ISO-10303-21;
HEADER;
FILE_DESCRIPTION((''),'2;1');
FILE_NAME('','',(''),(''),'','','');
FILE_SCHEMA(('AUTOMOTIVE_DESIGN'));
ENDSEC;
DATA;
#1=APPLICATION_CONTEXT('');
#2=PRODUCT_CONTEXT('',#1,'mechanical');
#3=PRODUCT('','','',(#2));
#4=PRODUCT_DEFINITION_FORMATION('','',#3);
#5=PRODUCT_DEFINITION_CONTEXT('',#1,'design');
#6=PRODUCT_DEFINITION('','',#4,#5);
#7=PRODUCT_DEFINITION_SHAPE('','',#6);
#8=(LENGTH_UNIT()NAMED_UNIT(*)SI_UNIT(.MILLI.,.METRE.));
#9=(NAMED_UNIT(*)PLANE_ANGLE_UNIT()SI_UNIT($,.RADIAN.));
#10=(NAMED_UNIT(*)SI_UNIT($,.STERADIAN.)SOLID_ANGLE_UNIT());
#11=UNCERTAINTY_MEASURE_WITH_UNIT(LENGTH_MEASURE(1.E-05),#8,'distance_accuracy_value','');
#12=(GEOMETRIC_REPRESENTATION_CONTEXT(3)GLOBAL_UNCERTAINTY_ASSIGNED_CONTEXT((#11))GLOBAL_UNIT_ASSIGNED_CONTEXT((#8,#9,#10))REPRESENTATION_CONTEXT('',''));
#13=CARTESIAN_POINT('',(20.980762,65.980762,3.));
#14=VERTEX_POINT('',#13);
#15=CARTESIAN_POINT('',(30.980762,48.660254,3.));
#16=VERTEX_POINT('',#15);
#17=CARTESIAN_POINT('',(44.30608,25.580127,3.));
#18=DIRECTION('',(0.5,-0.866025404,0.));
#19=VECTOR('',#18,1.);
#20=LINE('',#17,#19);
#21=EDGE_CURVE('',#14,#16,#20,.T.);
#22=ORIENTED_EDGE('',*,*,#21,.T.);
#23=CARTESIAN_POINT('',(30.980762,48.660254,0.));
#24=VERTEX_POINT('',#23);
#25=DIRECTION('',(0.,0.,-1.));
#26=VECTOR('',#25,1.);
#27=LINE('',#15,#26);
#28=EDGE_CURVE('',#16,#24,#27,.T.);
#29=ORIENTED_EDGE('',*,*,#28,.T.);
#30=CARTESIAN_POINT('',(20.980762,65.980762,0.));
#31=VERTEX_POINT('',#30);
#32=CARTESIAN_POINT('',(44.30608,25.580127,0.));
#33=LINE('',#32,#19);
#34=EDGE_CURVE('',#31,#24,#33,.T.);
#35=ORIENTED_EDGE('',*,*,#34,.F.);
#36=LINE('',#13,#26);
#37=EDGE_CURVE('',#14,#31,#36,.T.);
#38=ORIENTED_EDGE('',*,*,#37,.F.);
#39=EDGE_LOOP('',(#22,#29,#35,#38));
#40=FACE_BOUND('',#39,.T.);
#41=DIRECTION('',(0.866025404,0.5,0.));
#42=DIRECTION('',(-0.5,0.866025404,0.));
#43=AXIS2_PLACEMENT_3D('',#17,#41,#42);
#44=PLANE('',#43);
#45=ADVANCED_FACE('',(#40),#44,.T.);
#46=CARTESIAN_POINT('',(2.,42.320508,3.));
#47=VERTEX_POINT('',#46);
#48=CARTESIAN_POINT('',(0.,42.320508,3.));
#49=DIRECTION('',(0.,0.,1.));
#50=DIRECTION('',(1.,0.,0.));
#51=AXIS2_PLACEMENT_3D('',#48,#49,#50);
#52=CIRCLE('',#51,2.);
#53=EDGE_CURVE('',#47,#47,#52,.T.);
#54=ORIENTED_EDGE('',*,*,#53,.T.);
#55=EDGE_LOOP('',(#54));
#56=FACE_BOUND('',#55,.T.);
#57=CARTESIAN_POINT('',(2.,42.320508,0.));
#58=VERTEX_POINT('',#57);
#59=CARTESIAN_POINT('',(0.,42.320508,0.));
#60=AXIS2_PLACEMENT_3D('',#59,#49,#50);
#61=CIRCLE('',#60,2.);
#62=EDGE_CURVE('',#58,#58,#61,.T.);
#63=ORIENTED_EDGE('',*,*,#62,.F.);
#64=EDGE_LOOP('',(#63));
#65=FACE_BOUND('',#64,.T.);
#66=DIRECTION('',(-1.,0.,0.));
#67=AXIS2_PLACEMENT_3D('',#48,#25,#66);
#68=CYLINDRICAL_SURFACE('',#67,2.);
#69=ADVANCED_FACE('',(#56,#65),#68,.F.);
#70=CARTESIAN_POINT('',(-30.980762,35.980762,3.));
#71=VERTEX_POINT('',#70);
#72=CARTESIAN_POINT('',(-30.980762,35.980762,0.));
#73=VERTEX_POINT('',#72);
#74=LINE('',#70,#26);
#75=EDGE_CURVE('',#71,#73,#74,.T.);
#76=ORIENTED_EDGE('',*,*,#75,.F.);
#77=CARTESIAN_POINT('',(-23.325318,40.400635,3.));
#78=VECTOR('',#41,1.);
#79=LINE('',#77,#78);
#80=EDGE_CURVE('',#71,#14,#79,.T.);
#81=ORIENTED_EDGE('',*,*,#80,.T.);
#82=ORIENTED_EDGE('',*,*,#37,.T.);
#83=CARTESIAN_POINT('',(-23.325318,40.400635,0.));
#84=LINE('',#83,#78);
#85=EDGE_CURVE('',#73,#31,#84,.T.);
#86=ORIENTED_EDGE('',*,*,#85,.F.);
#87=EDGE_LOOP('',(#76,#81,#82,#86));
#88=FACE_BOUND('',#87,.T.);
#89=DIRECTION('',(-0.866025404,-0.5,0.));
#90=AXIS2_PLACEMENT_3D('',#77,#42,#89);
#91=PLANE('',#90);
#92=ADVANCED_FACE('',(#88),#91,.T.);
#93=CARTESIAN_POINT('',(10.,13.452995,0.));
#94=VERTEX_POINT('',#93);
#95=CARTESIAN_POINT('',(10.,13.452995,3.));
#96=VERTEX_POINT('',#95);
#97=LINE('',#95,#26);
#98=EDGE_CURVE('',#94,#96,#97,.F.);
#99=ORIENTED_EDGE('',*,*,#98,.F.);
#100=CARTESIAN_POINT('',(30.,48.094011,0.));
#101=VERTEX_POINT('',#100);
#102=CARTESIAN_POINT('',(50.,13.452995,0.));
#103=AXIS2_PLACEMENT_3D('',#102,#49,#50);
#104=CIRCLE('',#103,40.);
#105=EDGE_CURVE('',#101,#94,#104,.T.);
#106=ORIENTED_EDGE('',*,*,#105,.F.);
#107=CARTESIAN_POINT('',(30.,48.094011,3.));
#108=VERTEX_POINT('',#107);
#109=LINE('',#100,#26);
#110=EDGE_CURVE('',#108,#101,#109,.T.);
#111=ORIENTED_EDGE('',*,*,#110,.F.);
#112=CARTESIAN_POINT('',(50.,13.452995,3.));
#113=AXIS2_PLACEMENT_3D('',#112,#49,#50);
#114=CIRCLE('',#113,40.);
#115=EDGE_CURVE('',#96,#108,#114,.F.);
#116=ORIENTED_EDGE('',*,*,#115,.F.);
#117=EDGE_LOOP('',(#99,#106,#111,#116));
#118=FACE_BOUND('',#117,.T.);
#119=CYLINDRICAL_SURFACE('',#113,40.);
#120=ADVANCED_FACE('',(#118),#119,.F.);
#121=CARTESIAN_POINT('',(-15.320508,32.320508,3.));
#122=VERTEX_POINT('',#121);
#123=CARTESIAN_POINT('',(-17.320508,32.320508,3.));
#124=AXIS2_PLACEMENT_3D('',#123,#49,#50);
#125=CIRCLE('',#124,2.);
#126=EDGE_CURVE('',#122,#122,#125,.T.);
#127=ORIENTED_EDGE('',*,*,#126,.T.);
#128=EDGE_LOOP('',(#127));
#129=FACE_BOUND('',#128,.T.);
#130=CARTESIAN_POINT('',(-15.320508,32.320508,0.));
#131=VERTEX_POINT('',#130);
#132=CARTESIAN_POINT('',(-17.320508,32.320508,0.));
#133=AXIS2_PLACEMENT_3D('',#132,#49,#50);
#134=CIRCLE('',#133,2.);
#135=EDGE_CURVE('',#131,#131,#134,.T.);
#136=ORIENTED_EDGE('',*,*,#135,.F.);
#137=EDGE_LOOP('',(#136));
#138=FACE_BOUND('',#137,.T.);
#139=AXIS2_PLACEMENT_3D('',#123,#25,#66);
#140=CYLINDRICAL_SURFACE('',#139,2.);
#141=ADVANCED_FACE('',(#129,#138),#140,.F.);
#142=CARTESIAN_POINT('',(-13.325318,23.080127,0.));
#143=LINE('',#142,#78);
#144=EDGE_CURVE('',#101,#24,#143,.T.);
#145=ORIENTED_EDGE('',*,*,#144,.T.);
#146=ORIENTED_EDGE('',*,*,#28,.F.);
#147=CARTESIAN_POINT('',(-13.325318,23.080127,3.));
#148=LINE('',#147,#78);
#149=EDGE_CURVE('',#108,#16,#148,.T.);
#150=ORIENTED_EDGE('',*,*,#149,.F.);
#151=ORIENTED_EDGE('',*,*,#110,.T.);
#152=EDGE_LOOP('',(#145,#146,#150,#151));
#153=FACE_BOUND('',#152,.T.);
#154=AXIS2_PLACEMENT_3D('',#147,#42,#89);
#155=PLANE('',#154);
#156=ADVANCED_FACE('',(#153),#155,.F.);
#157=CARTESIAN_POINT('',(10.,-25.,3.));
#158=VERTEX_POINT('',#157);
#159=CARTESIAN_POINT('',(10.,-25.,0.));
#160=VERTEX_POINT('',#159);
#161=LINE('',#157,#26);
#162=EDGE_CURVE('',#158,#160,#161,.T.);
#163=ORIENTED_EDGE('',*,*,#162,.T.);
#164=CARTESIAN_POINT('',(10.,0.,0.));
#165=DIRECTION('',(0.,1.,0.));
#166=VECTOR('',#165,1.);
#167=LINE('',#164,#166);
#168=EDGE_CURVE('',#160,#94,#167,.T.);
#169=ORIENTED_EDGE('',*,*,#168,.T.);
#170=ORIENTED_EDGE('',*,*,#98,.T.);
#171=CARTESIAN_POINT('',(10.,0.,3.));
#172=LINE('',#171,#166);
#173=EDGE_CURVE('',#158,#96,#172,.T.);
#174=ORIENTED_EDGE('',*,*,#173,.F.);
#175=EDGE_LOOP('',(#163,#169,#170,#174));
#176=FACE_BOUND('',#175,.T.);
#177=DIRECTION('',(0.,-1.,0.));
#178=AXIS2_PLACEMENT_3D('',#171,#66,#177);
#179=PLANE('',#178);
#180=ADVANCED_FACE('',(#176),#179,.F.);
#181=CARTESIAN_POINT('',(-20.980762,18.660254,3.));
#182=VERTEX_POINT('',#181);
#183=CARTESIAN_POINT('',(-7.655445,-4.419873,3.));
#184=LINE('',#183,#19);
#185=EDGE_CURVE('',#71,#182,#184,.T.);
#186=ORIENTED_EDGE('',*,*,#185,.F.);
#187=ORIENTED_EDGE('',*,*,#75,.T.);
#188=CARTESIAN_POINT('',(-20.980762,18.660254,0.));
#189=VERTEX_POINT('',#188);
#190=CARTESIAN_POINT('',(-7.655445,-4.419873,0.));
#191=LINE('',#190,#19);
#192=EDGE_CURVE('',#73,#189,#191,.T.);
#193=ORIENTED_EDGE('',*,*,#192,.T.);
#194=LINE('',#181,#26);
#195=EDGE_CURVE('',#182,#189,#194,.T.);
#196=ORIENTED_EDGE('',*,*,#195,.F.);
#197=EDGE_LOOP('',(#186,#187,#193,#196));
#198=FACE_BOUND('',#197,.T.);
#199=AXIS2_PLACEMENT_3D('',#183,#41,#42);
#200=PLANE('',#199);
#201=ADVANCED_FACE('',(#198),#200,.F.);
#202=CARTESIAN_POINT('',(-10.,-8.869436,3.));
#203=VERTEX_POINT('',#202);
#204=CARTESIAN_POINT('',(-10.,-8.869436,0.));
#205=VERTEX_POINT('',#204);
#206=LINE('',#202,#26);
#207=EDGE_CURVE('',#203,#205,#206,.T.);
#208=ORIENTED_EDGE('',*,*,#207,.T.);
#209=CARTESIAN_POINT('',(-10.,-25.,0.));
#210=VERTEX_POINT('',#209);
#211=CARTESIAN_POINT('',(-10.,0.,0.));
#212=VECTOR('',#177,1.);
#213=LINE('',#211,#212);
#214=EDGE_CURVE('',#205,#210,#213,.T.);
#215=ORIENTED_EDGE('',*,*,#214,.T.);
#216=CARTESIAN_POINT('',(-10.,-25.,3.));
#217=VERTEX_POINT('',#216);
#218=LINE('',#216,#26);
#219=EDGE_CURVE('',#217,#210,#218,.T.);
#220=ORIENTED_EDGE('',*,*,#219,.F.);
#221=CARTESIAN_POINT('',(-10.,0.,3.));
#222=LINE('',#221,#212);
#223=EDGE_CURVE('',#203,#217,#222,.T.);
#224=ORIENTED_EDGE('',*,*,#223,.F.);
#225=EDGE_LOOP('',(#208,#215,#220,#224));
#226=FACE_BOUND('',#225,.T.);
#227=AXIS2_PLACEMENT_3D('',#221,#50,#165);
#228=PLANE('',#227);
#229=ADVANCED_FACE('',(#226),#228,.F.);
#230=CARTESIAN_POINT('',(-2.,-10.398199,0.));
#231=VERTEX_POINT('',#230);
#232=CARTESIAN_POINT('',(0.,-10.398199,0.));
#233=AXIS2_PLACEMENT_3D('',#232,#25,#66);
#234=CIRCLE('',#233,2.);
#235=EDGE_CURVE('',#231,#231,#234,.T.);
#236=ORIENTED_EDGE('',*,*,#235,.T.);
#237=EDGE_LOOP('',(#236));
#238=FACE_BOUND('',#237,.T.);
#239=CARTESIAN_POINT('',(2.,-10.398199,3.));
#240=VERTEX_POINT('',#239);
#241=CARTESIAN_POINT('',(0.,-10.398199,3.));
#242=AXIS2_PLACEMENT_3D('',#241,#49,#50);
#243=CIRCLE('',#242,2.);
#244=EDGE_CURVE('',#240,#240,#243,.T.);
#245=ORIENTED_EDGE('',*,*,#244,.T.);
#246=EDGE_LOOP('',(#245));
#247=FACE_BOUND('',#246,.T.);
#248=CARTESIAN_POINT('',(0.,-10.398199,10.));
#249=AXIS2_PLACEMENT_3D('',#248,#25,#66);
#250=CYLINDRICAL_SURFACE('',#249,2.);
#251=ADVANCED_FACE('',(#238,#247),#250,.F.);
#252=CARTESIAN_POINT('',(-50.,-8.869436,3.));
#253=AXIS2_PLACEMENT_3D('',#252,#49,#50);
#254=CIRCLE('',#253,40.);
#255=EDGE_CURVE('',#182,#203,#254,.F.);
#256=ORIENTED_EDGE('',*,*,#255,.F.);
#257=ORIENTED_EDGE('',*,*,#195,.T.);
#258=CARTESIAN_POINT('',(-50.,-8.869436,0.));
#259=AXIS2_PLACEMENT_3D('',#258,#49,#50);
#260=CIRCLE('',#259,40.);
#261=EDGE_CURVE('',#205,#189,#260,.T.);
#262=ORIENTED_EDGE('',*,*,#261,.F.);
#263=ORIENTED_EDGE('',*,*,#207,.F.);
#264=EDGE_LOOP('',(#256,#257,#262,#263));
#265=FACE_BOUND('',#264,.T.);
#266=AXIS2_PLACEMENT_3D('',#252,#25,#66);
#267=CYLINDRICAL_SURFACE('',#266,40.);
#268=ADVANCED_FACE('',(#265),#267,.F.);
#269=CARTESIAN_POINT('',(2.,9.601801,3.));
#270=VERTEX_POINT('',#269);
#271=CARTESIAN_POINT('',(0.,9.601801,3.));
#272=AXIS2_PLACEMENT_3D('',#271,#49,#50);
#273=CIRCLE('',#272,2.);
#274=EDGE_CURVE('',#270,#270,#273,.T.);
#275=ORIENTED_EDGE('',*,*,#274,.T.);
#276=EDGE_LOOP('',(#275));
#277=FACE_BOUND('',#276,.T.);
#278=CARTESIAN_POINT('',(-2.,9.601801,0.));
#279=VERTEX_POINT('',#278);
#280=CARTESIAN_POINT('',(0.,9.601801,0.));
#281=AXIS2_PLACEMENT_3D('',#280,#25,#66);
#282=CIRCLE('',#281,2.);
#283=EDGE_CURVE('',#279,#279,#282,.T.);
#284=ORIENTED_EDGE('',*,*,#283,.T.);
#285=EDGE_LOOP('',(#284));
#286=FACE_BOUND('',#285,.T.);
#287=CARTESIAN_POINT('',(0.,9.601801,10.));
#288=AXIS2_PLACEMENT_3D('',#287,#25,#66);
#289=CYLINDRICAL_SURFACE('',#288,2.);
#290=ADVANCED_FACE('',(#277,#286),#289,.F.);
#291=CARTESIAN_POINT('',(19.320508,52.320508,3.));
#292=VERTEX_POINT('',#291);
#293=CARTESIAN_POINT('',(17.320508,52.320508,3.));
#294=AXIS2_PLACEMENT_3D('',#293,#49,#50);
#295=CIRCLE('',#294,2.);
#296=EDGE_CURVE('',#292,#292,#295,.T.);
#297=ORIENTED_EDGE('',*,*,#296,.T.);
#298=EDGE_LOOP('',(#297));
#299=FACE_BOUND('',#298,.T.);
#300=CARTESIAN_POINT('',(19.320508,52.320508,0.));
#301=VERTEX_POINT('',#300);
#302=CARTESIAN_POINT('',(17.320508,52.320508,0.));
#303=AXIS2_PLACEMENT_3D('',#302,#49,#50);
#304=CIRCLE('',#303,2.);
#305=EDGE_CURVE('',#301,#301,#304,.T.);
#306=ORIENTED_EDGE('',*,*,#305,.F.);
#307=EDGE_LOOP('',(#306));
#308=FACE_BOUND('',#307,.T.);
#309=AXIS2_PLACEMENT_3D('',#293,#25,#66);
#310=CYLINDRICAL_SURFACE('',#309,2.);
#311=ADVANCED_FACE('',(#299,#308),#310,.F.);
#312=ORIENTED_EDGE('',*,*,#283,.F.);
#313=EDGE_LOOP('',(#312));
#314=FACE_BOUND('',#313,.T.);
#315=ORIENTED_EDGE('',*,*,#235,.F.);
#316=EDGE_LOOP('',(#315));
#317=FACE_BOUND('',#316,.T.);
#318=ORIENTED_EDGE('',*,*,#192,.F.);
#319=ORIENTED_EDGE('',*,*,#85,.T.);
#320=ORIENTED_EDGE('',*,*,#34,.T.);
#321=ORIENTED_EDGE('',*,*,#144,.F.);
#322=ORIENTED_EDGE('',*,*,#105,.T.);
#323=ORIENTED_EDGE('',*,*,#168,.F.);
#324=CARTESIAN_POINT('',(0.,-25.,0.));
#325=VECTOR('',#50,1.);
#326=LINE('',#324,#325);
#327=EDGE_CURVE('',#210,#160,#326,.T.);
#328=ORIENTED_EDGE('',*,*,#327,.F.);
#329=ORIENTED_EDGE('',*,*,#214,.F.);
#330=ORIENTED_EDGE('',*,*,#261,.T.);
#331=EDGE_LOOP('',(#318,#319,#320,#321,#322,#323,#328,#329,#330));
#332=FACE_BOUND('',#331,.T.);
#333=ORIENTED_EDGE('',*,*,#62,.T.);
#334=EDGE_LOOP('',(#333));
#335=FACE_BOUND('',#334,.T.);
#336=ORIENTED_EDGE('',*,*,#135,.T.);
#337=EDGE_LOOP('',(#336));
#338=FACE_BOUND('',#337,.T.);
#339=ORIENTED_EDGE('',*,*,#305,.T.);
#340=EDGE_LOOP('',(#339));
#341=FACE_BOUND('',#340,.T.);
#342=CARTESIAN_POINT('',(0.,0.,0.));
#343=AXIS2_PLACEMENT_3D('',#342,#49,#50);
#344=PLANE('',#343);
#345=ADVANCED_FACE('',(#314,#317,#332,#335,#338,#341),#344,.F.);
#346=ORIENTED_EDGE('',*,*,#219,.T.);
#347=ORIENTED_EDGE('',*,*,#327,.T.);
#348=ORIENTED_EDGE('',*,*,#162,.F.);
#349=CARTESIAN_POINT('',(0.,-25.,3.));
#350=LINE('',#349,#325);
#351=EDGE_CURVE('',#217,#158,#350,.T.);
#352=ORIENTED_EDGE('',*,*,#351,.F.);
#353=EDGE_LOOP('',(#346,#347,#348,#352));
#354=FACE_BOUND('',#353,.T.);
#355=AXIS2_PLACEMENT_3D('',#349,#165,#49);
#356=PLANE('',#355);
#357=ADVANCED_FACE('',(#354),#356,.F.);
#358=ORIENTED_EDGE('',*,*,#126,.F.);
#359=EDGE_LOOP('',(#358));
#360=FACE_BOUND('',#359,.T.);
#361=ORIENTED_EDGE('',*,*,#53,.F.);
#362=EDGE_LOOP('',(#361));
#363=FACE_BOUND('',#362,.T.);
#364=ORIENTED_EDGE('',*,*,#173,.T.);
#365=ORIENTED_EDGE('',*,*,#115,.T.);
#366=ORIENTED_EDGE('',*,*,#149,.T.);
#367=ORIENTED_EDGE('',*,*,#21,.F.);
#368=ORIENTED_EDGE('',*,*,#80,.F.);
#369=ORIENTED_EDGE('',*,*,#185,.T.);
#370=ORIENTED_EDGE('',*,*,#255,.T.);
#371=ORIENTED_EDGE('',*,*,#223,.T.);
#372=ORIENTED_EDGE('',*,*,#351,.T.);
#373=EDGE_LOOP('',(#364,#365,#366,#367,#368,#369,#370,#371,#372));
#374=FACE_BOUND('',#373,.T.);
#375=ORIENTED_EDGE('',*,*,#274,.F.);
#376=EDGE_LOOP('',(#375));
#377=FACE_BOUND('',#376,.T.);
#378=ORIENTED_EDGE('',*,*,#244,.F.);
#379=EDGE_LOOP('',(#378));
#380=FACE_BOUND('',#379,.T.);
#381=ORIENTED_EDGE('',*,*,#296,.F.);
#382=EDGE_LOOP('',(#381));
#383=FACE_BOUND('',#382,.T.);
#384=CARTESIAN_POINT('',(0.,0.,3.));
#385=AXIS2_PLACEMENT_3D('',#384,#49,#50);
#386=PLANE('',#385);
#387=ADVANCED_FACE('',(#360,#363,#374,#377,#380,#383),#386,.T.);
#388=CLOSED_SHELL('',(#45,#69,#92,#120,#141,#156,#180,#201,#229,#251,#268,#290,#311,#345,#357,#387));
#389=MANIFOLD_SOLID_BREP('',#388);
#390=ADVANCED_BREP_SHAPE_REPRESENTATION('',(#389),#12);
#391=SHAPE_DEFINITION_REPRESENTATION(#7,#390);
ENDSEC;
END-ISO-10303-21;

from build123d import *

# Parameters (mm, degrees)
SKETCH_1_R          = 2
SKETCH_1_W          = 20
SKETCH_1_H          = 50
EXTRUDE_1_DEPTH     = 3
FILLET_1_R          = 40
SKETCH_2_R          = 2
CUT_EXTRUDE_1_DEPTH = 10


with BuildPart() as part:
    # 草图1 → 凸台-拉伸1 (new body)
    # profile 1 of 3: a face of its own
    with BuildSketch(Plane.XY):
        Polygon((10, 36.547005384), (-10, 25), (10, 25), align=None)
    # profile 2 of 3: a face of its own
    with BuildSketch(Plane.XY):
        Polygon((20.980762114, 65.980762114), (30.980762114, 48.660254038), (-20.980762114, 18.660254038), (-30.980762114, 35.980762114), align=None)
        with Locations((0, 42.320508076)):
            Circle(SKETCH_1_R, mode=Mode.SUBTRACT)
        with Locations((17.320508076, 52.320508076)):
            Circle(SKETCH_1_R, mode=Mode.SUBTRACT)
        with Locations((-17.320508076, 32.320508076)):
            Circle(SKETCH_1_R, mode=Mode.SUBTRACT)
    # profile 3 of 3: a face of its own
    with BuildSketch(Plane.XY):
        Rectangle(SKETCH_1_W, SKETCH_1_H)
    extrude(amount=EXTRUDE_1_DEPTH)

    # 圆角1
    # the kernel refuses this fillet: 40 mm, written as the material it adds along each edge
    with BuildSketch(Plane(origin=(10, 36.547005384, 0), x_dir=(0, -1, 0), z_dir=(0, 0, 1))) as fillet_1_piece_1:
        with BuildLine():
            CenterArc((FILLET_1_R * 0.57735026919, FILLET_1_R), FILLET_1_R, 210, 60)
            Line((-FILLET_1_R * 0.288675134595, FILLET_1_R * 0.5), (-FILLET_1_R * 0.305995642671, FILLET_1_R * 0.49))
            Line((-FILLET_1_R * 0.305995642671, FILLET_1_R * 0.49), (-FILLET_1_R * 0.0115470053838, -FILLET_1_R * 0.02))
            Line((-FILLET_1_R * 0.0115470053838, -FILLET_1_R * 0.02), (FILLET_1_R * 0.57735026919, -FILLET_1_R * 0.02))
            Line((FILLET_1_R * 0.57735026919, -FILLET_1_R * 0.02), (FILLET_1_R * 0.57735026919, 0))
        make_face()
    extrude(amount=3)
    with BuildSketch(Plane(origin=(-10, 25, 0), x_dir=(-0.8660254037844363, -0.5000000000000041, 0), z_dir=(0, 0, 1))) as fillet_1_piece_2:
        with BuildLine():
            CenterArc((51.575734141, 9.331791971), FILLET_1_R, 150, 43.49112832)
            Line((16.93471799, 29.331791971), (16.241897667, 29.731791971))
            Line((16.241897667, 29.731791971), (-0.692820323, 0.4))
            Line((-0.692820323, 0.4), (0, -0.8))
            ThreePointArc((0, -0.8), (6.339745962, -0.8), (11.90156708, -0.186635839))
            Line((11.90156708, -0.186635839), (12.679491924, 0))
        make_face()
    extrude(amount=3)

    # 草图2 → 切除-拉伸1 (cut)
    with BuildSketch(Plane(origin=(0, 0, 0), x_dir=(-1, 0, 0), z_dir=(0, 0, -1))):
        with Locations((0, 9.601800669)):
            Circle(SKETCH_2_R)
        with Locations((0, -10.398199331)):
            Circle(SKETCH_2_R)
    extrude(amount=-CUT_EXTRUDE_1_DEPTH, mode=Mode.SUBTRACT)


solid = part.part
